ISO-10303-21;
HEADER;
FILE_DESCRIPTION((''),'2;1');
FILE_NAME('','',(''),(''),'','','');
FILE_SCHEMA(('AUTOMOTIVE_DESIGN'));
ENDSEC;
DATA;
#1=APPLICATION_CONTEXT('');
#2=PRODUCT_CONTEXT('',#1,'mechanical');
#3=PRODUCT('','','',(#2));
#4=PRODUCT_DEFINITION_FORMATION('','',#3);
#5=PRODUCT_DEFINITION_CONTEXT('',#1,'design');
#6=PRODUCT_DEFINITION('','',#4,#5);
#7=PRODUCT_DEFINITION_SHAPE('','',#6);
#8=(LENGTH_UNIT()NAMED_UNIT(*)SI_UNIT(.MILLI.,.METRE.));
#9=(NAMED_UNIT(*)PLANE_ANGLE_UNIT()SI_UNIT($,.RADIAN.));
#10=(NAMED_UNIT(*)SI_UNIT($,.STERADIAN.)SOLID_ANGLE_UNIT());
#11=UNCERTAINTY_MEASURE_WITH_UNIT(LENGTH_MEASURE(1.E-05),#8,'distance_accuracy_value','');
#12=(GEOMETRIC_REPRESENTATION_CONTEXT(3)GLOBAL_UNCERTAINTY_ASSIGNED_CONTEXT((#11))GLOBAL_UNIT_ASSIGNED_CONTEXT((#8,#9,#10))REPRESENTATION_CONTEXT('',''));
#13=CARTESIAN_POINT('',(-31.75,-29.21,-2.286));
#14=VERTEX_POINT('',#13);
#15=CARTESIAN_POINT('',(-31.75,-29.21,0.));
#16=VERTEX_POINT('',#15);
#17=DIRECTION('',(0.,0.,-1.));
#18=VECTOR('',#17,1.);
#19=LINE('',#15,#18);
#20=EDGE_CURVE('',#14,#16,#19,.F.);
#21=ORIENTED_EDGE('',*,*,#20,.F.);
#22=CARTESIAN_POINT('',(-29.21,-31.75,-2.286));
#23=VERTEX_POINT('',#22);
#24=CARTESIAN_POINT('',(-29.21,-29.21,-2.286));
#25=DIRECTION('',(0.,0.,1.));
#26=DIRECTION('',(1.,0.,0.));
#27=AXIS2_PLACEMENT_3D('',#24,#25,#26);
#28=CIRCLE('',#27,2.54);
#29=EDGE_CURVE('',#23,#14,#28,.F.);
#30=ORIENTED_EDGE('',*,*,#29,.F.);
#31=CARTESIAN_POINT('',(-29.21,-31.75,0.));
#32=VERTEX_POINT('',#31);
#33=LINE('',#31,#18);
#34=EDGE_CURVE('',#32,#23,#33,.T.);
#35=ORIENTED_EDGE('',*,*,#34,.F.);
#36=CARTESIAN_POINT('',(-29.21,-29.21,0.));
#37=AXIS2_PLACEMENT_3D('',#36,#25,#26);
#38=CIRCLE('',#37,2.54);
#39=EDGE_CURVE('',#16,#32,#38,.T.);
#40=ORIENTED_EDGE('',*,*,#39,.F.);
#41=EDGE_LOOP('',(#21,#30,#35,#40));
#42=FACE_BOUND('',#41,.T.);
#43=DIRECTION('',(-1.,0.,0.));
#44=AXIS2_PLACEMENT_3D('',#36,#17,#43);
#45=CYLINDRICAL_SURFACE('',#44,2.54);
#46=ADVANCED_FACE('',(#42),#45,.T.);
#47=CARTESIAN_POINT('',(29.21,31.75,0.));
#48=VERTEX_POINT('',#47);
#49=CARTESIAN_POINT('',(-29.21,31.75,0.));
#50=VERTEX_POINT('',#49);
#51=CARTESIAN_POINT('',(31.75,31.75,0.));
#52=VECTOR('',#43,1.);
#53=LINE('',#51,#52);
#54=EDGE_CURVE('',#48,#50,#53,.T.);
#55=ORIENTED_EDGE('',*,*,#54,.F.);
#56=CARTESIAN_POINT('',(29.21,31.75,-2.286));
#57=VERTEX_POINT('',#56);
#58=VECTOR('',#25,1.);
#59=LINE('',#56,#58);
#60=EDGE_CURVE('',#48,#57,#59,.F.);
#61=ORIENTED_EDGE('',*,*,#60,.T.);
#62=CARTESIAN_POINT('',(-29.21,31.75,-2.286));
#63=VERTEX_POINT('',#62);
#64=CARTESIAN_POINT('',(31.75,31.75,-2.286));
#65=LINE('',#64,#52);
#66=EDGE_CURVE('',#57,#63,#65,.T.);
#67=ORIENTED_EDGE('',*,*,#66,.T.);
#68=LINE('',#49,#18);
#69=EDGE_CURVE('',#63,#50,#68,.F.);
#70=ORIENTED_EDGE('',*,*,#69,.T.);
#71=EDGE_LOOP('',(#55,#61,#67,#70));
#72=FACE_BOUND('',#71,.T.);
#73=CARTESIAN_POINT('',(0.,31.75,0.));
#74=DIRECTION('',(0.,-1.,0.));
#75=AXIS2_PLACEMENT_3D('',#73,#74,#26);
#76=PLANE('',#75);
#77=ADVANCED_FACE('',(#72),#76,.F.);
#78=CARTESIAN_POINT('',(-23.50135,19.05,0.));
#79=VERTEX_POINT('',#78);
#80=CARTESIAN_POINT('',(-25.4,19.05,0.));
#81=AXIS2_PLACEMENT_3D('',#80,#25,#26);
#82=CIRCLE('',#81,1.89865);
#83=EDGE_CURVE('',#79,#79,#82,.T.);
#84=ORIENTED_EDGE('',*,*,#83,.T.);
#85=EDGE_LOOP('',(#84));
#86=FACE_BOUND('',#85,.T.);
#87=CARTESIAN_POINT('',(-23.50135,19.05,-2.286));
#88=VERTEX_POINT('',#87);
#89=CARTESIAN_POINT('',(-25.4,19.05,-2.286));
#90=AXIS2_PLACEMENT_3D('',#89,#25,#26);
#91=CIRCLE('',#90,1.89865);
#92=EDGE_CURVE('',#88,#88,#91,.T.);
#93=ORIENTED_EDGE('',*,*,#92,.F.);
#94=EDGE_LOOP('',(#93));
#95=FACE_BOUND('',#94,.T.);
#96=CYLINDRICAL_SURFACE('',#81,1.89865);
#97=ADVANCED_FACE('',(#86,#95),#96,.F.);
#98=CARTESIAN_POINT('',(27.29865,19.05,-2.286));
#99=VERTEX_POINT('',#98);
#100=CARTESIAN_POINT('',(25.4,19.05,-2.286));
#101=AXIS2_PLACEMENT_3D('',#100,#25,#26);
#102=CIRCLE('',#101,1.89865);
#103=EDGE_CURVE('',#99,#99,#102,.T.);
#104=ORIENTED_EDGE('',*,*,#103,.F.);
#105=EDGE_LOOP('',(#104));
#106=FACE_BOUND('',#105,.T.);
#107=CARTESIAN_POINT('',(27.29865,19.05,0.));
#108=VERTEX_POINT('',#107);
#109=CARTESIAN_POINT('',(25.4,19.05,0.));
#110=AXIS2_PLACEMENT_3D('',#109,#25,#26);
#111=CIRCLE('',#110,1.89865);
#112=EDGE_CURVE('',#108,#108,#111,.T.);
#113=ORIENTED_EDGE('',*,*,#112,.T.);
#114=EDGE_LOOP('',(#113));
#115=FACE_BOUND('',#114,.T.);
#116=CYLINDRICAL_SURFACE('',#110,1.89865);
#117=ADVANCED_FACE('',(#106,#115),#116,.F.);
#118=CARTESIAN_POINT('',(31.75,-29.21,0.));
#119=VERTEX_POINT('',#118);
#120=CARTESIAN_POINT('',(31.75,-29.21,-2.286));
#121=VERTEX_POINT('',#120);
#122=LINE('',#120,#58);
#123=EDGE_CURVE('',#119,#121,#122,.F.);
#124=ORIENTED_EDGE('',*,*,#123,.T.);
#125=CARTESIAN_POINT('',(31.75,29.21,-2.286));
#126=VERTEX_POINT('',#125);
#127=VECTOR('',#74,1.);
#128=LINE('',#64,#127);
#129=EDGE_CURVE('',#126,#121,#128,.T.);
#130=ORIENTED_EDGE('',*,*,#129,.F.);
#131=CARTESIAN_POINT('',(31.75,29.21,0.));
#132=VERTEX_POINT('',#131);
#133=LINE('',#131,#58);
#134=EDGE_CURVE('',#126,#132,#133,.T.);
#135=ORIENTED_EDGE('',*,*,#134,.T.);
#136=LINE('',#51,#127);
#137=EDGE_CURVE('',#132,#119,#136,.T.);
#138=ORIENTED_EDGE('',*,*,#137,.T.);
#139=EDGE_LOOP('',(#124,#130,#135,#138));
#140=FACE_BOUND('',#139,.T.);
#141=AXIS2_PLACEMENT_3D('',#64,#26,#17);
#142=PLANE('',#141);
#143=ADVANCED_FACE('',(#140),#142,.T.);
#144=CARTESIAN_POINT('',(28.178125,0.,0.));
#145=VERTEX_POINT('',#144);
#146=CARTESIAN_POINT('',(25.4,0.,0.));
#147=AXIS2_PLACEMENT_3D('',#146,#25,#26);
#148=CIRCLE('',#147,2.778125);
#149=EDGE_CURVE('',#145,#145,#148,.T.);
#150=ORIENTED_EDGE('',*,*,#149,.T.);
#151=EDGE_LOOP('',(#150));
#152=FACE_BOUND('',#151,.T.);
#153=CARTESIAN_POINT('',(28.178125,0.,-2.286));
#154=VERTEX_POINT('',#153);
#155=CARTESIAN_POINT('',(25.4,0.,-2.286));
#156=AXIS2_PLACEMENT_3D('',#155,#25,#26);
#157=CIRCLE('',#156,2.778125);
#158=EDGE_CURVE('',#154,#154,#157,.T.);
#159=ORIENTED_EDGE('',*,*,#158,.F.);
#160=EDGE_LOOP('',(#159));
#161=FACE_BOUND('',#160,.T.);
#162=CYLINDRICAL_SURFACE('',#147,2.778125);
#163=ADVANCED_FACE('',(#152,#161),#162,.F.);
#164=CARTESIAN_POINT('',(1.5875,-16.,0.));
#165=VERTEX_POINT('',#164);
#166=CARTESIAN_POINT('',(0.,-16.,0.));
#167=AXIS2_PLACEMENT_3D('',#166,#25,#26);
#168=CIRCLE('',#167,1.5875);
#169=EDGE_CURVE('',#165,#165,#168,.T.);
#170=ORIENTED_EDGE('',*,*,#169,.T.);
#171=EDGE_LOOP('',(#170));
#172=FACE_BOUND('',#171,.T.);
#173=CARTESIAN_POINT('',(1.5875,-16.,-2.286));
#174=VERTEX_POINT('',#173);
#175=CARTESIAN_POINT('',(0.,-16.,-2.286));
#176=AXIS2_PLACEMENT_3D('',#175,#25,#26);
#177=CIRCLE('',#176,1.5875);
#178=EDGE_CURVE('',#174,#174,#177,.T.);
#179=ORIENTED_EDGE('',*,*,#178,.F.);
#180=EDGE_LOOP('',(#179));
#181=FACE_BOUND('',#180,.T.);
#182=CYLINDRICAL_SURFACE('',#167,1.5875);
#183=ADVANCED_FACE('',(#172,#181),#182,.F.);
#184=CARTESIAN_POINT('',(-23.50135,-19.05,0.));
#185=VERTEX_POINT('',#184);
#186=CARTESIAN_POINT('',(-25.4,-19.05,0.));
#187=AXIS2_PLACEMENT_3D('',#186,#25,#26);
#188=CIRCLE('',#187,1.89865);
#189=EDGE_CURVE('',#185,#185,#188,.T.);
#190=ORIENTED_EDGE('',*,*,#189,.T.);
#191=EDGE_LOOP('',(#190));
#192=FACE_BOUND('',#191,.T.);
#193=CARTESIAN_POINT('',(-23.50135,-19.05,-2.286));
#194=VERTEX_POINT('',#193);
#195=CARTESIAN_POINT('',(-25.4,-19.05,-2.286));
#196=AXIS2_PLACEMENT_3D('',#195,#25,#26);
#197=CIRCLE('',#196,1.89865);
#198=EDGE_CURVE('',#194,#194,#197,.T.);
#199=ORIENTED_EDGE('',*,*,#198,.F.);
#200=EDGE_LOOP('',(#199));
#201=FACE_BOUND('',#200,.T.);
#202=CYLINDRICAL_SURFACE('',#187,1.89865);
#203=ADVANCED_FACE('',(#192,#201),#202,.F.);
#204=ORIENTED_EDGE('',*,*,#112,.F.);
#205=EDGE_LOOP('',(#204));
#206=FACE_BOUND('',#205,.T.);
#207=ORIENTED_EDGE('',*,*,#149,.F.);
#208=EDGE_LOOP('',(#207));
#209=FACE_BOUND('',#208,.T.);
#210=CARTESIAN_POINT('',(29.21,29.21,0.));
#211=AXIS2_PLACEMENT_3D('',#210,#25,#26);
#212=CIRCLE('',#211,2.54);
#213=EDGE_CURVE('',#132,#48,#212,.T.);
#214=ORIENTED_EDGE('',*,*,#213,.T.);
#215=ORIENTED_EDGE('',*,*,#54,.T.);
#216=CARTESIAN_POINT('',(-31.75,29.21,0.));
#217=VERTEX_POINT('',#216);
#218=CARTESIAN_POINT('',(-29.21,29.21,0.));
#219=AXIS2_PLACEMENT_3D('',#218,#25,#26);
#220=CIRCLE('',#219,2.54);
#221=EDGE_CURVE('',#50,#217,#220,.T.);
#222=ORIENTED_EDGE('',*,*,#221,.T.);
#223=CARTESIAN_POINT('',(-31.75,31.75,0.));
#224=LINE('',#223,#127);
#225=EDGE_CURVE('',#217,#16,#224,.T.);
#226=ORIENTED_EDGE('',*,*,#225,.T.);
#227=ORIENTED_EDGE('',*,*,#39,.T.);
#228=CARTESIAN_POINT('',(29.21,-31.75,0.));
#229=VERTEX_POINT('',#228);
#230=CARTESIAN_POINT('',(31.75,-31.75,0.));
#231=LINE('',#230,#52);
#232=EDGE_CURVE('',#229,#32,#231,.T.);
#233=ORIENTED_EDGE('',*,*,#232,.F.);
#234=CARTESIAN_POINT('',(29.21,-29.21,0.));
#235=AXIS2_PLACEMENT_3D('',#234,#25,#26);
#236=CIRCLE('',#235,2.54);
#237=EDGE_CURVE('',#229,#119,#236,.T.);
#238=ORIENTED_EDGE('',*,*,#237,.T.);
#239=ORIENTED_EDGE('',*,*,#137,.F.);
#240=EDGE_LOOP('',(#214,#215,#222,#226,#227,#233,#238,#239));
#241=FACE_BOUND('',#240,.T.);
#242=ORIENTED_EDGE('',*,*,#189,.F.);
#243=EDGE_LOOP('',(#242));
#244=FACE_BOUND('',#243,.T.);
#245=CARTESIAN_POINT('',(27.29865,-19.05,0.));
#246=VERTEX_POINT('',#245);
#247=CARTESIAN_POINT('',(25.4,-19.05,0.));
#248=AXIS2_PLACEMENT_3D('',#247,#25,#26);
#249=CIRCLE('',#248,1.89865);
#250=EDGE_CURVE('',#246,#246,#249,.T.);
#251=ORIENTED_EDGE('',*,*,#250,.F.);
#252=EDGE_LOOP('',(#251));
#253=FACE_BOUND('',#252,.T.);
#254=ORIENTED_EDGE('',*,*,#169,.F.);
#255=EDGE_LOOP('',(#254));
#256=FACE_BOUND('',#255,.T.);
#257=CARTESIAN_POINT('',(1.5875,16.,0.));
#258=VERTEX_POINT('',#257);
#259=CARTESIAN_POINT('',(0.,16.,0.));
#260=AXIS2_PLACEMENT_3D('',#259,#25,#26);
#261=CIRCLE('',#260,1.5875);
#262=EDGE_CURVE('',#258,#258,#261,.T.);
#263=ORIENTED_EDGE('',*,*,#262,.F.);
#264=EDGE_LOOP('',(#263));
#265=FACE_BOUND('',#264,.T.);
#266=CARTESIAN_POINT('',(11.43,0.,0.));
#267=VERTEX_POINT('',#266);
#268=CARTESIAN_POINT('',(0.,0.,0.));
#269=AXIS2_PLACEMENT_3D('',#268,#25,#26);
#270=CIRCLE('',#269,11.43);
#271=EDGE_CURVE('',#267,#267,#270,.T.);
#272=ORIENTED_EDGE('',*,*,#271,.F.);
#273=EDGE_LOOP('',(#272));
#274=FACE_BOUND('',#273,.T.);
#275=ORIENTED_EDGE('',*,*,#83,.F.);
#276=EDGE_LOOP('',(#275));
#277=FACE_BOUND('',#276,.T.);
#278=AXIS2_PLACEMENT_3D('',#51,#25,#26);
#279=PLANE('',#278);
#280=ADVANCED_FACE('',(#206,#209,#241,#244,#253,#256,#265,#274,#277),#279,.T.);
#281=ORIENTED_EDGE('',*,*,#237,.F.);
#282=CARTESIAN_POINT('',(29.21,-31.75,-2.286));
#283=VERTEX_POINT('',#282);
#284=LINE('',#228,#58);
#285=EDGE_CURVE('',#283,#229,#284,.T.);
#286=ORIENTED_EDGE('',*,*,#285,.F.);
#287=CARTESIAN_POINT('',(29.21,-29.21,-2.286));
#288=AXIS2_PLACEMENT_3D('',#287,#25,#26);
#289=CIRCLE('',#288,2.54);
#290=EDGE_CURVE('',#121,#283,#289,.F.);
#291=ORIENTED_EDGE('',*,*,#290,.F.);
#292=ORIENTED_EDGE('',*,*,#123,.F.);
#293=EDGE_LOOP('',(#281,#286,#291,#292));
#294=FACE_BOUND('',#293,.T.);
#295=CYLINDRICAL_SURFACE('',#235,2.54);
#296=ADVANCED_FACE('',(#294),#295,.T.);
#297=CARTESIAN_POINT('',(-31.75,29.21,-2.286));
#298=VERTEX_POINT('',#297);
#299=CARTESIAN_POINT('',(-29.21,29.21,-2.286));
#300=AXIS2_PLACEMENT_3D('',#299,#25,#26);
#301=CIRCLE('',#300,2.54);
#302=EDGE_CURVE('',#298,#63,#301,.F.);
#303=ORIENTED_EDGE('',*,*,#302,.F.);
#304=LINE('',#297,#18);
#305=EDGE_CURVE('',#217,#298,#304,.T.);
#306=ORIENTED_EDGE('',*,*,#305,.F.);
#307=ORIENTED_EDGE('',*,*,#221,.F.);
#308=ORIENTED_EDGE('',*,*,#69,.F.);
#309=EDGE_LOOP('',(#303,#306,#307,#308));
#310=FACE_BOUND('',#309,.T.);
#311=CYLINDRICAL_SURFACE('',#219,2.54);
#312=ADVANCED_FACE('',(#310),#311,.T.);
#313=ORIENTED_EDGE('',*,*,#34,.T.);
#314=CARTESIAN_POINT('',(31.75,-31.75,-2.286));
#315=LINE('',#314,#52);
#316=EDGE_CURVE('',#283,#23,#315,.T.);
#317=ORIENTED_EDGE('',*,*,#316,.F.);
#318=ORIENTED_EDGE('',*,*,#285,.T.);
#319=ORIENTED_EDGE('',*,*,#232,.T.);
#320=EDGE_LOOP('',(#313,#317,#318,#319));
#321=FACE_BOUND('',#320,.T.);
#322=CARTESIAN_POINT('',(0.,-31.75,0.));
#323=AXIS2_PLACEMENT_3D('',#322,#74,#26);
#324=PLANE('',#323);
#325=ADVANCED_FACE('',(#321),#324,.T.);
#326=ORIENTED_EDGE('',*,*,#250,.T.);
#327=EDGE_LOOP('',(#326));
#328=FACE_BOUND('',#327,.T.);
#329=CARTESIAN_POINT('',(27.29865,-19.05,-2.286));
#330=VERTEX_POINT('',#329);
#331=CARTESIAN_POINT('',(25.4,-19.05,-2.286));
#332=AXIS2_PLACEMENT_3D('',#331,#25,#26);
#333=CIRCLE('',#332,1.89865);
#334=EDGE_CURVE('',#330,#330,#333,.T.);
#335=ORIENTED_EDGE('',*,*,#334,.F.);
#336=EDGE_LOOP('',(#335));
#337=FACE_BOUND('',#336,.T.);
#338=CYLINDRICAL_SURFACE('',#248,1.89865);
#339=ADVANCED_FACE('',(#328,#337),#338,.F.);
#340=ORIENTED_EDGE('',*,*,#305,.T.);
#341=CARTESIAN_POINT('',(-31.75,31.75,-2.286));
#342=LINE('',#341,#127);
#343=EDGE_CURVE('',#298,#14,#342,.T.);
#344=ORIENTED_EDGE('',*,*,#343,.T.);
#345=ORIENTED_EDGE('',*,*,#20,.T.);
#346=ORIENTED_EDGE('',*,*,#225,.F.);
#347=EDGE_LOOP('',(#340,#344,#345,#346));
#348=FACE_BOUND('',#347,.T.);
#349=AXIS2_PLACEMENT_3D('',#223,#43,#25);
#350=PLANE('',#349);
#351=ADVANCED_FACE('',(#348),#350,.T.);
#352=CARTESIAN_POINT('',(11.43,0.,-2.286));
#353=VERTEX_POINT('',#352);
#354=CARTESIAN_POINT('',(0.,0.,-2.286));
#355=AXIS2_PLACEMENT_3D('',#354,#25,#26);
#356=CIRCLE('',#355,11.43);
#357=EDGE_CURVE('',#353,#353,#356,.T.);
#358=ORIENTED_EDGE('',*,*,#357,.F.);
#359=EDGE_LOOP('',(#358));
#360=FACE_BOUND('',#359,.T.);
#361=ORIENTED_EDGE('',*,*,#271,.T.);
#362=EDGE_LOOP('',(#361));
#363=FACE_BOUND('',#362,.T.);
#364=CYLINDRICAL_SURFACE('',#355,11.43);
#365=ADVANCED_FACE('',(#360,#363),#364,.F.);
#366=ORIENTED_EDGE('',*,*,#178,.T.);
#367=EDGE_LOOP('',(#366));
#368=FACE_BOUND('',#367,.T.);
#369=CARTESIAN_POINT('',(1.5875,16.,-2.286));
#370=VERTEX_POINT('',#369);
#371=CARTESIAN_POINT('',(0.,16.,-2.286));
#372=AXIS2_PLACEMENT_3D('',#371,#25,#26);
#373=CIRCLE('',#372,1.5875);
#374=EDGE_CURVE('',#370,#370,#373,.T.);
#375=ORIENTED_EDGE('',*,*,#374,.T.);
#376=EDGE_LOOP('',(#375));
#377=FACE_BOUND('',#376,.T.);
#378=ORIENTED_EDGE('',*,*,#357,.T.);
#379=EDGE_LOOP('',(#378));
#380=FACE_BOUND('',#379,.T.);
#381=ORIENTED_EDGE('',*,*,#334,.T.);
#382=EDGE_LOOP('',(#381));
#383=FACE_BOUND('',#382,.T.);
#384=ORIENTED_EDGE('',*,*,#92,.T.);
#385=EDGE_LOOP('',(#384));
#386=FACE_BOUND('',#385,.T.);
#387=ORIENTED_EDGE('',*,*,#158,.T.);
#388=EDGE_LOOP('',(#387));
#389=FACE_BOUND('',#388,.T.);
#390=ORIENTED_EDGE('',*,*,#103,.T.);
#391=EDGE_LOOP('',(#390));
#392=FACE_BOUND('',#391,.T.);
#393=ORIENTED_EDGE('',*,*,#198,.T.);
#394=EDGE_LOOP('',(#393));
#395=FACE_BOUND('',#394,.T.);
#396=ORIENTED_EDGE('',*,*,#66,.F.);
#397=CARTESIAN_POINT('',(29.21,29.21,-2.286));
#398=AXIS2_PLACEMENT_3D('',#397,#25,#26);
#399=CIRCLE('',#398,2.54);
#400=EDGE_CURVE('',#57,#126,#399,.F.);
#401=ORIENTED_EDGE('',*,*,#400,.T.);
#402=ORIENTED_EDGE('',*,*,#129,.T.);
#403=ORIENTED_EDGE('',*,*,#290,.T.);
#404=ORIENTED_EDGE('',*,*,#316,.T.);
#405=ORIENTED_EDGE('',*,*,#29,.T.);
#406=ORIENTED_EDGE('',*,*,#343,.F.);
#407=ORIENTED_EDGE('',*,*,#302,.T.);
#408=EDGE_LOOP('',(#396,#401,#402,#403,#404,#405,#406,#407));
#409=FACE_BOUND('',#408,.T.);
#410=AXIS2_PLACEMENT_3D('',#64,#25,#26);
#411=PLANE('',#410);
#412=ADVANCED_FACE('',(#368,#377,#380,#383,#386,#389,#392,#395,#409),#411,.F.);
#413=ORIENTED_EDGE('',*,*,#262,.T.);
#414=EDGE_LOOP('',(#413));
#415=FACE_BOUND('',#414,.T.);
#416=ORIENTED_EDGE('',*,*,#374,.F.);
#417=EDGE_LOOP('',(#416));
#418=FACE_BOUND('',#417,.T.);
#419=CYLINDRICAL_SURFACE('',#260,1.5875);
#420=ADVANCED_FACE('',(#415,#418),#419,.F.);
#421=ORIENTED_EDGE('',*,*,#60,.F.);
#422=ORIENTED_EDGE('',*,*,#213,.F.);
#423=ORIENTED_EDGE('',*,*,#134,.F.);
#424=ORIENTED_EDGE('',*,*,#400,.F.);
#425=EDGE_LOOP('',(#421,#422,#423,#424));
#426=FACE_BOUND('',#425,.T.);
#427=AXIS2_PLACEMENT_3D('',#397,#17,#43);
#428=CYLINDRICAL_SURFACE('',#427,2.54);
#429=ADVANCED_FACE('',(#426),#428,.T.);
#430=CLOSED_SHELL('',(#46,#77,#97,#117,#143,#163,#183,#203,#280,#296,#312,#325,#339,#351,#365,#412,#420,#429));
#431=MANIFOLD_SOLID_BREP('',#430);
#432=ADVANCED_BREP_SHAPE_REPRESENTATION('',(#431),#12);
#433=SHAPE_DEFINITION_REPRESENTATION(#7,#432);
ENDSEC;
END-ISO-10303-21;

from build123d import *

# Parameters (mm, degrees)
SKETCH3_W                       = 63.5
SKETCH3_H                       = 2.286
BASE_FLANGE1_DEPTH              = 31.75
FILLET1_R                       = 2.54
F_25_0_1495_DIAMETER_HOLE1_D    = 3.7973
SKETCH10_R                      = 11.43
CUT_EXTRUDE1_DEPTH              = 45.959435005
F_7_32_0_21875_DIAMETER_HOLE1_D = 5.55625
F_1_8_0_125_DIAMETER_HOLE1_D    = 3.175


# Sheet-metal steps are written as plain solids
with BuildPart() as part:
    # Sketch3 → Base-Flange1 (new, symmetric)
    with BuildSketch(Plane(origin=(0, 0, 0), x_dir=(-1, 0, 0), z_dir=(0, 1, 0))):
        with Locations((0, -1.143)):
            Rectangle(SKETCH3_W, SKETCH3_H)
    extrude(amount=BASE_FLANGE1_DEPTH, both=True)

    # Fillet1
    fillet1_edges = [part.edges().sort_by_distance(p)[0] for p in [
        (31.75, 31.75, -1.143),
        (31.75, -31.75, -1.143),
        (-31.75, -31.75, -1.143),
        (-31.75, 31.75, -1.143),
    ]]
    fillet(fillet1_edges, radius=FILLET1_R)

    # #25 (0.1495) Diameter Hole1 (through all)
    with Locations(Plane.XY):
        with Locations((-25.4, 19.05), (25.4, 19.05), (25.4, -19.05), (-25.4, -19.05)):
            Hole(F_25_0_1495_DIAMETER_HOLE1_D / 2)

    # Sketch10 → Cut-Extrude1 (cut, through all)
    with BuildSketch(Plane.XY):
        Circle(SKETCH10_R)
    extrude(amount=-CUT_EXTRUDE1_DEPTH, mode=Mode.SUBTRACT)

    # 7/32 (0.21875) Diameter Hole1 (through all)
    with Locations(Plane.XY):
        with Locations((25.4, 0)):
            Hole(F_7_32_0_21875_DIAMETER_HOLE1_D / 2)

    # 1/8 (0.125) Diameter Hole1 (through all)
    with Locations(Plane.XY):
        with Locations((0, 16), (0, -16)):
            Hole(F_1_8_0_125_DIAMETER_HOLE1_D / 2)


solid = part.part
